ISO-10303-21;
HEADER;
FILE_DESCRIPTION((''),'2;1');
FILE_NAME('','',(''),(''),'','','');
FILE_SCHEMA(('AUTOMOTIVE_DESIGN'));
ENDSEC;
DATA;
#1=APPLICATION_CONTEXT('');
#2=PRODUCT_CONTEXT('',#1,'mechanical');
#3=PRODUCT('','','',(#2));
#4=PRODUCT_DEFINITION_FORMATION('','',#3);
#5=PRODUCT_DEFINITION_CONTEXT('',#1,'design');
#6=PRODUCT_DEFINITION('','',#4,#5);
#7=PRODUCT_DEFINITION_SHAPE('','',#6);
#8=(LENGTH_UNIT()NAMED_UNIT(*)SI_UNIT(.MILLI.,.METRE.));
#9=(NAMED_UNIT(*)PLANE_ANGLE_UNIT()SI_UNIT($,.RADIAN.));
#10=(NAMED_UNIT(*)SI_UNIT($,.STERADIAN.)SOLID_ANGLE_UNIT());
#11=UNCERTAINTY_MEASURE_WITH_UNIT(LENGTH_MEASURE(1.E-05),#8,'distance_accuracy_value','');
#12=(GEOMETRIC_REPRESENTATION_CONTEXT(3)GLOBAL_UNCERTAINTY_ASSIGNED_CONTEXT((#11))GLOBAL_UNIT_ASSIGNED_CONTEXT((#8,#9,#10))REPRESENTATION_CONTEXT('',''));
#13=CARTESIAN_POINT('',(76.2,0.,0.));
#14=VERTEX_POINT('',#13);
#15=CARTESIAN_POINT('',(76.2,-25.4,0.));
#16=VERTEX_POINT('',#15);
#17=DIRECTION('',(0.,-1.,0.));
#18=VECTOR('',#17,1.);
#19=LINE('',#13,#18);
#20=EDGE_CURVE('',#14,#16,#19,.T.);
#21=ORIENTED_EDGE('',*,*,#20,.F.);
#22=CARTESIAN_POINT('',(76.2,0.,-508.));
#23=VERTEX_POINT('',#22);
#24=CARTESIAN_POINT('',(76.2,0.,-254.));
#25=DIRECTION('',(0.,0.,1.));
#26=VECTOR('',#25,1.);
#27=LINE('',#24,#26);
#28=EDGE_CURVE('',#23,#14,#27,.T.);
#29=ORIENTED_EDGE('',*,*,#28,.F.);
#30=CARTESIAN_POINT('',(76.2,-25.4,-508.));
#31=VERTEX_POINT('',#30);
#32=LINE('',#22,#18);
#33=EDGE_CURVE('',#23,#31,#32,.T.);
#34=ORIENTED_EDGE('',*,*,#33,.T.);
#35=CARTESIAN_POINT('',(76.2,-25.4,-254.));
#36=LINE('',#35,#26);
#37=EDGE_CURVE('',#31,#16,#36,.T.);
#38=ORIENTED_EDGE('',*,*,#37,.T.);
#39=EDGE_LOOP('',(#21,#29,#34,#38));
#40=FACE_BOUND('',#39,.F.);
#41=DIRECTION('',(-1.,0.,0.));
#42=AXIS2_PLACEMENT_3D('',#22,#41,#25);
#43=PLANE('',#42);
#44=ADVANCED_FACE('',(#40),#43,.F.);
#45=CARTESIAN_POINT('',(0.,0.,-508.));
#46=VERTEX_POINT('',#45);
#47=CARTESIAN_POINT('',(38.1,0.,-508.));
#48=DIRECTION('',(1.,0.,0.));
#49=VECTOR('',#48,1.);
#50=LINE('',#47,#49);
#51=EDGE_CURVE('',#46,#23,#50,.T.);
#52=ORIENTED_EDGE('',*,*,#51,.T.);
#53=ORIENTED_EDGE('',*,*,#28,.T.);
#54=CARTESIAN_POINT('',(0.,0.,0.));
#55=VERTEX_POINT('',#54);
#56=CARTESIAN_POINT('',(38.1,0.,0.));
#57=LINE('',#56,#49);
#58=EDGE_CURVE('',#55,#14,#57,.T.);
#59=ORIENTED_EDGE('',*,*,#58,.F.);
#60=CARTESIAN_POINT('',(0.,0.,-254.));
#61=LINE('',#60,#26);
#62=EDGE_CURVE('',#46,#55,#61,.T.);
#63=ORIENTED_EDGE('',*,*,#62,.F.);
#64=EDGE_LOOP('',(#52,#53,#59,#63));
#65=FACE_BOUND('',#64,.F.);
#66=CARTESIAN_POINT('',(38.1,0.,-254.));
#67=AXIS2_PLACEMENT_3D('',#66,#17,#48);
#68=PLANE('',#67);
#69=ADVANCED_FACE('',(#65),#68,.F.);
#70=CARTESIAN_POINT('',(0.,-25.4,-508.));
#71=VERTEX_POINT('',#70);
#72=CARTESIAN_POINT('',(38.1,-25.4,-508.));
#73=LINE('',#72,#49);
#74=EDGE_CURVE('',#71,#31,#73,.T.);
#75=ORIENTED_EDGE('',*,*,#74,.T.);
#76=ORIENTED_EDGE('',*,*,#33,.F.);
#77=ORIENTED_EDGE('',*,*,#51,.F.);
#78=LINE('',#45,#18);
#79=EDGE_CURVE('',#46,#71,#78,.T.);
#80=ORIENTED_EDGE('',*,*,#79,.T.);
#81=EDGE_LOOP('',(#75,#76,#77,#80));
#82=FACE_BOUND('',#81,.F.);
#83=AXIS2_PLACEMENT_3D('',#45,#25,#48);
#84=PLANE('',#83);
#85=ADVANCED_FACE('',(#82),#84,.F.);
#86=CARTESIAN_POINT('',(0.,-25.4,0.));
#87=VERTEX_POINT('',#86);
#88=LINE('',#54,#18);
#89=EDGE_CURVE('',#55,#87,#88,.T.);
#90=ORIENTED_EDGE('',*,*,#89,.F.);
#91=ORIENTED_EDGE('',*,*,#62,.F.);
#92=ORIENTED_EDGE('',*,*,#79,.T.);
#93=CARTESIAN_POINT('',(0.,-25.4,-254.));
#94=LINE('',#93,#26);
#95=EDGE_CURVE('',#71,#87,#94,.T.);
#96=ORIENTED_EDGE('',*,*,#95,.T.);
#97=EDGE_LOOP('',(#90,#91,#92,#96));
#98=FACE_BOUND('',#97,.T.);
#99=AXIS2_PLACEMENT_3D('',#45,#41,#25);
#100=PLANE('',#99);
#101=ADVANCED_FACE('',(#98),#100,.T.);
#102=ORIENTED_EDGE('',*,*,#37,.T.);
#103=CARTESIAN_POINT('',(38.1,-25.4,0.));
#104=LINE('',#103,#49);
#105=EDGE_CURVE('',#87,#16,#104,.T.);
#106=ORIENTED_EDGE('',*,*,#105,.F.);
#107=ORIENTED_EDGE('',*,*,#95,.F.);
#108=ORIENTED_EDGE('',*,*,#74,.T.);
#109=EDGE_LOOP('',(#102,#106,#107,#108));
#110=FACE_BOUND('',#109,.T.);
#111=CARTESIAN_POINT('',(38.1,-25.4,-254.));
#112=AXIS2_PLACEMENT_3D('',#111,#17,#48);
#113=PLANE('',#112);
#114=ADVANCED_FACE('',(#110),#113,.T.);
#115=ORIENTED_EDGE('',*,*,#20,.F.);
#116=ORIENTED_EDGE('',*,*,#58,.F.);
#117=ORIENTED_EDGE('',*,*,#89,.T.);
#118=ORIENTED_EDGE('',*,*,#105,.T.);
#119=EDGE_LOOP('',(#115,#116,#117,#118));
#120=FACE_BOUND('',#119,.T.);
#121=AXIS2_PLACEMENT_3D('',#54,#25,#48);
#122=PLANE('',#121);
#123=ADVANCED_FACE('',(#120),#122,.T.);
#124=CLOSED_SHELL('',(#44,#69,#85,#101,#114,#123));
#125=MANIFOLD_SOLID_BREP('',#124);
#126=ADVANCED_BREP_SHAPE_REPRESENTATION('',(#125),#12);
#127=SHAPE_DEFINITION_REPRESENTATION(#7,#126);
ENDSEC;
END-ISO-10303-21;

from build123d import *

# Parameters (mm, degrees)
F1_W     = 76.2
F1_H     = 508
F2_DEPTH = 25.4


# Not quite as in the source:
# - a variable given as a bare number and used for a length is read in inches; the dataset says mm whatever the document's units were


with BuildPart() as f2:
    # F1 (on Front) → F2 (new body)
    with BuildSketch(Plane.XZ):
        with Locations((38.1, -254)):
            Rectangle(F1_W, F1_H)
    extrude(amount=F2_DEPTH)


solid = f2.part
